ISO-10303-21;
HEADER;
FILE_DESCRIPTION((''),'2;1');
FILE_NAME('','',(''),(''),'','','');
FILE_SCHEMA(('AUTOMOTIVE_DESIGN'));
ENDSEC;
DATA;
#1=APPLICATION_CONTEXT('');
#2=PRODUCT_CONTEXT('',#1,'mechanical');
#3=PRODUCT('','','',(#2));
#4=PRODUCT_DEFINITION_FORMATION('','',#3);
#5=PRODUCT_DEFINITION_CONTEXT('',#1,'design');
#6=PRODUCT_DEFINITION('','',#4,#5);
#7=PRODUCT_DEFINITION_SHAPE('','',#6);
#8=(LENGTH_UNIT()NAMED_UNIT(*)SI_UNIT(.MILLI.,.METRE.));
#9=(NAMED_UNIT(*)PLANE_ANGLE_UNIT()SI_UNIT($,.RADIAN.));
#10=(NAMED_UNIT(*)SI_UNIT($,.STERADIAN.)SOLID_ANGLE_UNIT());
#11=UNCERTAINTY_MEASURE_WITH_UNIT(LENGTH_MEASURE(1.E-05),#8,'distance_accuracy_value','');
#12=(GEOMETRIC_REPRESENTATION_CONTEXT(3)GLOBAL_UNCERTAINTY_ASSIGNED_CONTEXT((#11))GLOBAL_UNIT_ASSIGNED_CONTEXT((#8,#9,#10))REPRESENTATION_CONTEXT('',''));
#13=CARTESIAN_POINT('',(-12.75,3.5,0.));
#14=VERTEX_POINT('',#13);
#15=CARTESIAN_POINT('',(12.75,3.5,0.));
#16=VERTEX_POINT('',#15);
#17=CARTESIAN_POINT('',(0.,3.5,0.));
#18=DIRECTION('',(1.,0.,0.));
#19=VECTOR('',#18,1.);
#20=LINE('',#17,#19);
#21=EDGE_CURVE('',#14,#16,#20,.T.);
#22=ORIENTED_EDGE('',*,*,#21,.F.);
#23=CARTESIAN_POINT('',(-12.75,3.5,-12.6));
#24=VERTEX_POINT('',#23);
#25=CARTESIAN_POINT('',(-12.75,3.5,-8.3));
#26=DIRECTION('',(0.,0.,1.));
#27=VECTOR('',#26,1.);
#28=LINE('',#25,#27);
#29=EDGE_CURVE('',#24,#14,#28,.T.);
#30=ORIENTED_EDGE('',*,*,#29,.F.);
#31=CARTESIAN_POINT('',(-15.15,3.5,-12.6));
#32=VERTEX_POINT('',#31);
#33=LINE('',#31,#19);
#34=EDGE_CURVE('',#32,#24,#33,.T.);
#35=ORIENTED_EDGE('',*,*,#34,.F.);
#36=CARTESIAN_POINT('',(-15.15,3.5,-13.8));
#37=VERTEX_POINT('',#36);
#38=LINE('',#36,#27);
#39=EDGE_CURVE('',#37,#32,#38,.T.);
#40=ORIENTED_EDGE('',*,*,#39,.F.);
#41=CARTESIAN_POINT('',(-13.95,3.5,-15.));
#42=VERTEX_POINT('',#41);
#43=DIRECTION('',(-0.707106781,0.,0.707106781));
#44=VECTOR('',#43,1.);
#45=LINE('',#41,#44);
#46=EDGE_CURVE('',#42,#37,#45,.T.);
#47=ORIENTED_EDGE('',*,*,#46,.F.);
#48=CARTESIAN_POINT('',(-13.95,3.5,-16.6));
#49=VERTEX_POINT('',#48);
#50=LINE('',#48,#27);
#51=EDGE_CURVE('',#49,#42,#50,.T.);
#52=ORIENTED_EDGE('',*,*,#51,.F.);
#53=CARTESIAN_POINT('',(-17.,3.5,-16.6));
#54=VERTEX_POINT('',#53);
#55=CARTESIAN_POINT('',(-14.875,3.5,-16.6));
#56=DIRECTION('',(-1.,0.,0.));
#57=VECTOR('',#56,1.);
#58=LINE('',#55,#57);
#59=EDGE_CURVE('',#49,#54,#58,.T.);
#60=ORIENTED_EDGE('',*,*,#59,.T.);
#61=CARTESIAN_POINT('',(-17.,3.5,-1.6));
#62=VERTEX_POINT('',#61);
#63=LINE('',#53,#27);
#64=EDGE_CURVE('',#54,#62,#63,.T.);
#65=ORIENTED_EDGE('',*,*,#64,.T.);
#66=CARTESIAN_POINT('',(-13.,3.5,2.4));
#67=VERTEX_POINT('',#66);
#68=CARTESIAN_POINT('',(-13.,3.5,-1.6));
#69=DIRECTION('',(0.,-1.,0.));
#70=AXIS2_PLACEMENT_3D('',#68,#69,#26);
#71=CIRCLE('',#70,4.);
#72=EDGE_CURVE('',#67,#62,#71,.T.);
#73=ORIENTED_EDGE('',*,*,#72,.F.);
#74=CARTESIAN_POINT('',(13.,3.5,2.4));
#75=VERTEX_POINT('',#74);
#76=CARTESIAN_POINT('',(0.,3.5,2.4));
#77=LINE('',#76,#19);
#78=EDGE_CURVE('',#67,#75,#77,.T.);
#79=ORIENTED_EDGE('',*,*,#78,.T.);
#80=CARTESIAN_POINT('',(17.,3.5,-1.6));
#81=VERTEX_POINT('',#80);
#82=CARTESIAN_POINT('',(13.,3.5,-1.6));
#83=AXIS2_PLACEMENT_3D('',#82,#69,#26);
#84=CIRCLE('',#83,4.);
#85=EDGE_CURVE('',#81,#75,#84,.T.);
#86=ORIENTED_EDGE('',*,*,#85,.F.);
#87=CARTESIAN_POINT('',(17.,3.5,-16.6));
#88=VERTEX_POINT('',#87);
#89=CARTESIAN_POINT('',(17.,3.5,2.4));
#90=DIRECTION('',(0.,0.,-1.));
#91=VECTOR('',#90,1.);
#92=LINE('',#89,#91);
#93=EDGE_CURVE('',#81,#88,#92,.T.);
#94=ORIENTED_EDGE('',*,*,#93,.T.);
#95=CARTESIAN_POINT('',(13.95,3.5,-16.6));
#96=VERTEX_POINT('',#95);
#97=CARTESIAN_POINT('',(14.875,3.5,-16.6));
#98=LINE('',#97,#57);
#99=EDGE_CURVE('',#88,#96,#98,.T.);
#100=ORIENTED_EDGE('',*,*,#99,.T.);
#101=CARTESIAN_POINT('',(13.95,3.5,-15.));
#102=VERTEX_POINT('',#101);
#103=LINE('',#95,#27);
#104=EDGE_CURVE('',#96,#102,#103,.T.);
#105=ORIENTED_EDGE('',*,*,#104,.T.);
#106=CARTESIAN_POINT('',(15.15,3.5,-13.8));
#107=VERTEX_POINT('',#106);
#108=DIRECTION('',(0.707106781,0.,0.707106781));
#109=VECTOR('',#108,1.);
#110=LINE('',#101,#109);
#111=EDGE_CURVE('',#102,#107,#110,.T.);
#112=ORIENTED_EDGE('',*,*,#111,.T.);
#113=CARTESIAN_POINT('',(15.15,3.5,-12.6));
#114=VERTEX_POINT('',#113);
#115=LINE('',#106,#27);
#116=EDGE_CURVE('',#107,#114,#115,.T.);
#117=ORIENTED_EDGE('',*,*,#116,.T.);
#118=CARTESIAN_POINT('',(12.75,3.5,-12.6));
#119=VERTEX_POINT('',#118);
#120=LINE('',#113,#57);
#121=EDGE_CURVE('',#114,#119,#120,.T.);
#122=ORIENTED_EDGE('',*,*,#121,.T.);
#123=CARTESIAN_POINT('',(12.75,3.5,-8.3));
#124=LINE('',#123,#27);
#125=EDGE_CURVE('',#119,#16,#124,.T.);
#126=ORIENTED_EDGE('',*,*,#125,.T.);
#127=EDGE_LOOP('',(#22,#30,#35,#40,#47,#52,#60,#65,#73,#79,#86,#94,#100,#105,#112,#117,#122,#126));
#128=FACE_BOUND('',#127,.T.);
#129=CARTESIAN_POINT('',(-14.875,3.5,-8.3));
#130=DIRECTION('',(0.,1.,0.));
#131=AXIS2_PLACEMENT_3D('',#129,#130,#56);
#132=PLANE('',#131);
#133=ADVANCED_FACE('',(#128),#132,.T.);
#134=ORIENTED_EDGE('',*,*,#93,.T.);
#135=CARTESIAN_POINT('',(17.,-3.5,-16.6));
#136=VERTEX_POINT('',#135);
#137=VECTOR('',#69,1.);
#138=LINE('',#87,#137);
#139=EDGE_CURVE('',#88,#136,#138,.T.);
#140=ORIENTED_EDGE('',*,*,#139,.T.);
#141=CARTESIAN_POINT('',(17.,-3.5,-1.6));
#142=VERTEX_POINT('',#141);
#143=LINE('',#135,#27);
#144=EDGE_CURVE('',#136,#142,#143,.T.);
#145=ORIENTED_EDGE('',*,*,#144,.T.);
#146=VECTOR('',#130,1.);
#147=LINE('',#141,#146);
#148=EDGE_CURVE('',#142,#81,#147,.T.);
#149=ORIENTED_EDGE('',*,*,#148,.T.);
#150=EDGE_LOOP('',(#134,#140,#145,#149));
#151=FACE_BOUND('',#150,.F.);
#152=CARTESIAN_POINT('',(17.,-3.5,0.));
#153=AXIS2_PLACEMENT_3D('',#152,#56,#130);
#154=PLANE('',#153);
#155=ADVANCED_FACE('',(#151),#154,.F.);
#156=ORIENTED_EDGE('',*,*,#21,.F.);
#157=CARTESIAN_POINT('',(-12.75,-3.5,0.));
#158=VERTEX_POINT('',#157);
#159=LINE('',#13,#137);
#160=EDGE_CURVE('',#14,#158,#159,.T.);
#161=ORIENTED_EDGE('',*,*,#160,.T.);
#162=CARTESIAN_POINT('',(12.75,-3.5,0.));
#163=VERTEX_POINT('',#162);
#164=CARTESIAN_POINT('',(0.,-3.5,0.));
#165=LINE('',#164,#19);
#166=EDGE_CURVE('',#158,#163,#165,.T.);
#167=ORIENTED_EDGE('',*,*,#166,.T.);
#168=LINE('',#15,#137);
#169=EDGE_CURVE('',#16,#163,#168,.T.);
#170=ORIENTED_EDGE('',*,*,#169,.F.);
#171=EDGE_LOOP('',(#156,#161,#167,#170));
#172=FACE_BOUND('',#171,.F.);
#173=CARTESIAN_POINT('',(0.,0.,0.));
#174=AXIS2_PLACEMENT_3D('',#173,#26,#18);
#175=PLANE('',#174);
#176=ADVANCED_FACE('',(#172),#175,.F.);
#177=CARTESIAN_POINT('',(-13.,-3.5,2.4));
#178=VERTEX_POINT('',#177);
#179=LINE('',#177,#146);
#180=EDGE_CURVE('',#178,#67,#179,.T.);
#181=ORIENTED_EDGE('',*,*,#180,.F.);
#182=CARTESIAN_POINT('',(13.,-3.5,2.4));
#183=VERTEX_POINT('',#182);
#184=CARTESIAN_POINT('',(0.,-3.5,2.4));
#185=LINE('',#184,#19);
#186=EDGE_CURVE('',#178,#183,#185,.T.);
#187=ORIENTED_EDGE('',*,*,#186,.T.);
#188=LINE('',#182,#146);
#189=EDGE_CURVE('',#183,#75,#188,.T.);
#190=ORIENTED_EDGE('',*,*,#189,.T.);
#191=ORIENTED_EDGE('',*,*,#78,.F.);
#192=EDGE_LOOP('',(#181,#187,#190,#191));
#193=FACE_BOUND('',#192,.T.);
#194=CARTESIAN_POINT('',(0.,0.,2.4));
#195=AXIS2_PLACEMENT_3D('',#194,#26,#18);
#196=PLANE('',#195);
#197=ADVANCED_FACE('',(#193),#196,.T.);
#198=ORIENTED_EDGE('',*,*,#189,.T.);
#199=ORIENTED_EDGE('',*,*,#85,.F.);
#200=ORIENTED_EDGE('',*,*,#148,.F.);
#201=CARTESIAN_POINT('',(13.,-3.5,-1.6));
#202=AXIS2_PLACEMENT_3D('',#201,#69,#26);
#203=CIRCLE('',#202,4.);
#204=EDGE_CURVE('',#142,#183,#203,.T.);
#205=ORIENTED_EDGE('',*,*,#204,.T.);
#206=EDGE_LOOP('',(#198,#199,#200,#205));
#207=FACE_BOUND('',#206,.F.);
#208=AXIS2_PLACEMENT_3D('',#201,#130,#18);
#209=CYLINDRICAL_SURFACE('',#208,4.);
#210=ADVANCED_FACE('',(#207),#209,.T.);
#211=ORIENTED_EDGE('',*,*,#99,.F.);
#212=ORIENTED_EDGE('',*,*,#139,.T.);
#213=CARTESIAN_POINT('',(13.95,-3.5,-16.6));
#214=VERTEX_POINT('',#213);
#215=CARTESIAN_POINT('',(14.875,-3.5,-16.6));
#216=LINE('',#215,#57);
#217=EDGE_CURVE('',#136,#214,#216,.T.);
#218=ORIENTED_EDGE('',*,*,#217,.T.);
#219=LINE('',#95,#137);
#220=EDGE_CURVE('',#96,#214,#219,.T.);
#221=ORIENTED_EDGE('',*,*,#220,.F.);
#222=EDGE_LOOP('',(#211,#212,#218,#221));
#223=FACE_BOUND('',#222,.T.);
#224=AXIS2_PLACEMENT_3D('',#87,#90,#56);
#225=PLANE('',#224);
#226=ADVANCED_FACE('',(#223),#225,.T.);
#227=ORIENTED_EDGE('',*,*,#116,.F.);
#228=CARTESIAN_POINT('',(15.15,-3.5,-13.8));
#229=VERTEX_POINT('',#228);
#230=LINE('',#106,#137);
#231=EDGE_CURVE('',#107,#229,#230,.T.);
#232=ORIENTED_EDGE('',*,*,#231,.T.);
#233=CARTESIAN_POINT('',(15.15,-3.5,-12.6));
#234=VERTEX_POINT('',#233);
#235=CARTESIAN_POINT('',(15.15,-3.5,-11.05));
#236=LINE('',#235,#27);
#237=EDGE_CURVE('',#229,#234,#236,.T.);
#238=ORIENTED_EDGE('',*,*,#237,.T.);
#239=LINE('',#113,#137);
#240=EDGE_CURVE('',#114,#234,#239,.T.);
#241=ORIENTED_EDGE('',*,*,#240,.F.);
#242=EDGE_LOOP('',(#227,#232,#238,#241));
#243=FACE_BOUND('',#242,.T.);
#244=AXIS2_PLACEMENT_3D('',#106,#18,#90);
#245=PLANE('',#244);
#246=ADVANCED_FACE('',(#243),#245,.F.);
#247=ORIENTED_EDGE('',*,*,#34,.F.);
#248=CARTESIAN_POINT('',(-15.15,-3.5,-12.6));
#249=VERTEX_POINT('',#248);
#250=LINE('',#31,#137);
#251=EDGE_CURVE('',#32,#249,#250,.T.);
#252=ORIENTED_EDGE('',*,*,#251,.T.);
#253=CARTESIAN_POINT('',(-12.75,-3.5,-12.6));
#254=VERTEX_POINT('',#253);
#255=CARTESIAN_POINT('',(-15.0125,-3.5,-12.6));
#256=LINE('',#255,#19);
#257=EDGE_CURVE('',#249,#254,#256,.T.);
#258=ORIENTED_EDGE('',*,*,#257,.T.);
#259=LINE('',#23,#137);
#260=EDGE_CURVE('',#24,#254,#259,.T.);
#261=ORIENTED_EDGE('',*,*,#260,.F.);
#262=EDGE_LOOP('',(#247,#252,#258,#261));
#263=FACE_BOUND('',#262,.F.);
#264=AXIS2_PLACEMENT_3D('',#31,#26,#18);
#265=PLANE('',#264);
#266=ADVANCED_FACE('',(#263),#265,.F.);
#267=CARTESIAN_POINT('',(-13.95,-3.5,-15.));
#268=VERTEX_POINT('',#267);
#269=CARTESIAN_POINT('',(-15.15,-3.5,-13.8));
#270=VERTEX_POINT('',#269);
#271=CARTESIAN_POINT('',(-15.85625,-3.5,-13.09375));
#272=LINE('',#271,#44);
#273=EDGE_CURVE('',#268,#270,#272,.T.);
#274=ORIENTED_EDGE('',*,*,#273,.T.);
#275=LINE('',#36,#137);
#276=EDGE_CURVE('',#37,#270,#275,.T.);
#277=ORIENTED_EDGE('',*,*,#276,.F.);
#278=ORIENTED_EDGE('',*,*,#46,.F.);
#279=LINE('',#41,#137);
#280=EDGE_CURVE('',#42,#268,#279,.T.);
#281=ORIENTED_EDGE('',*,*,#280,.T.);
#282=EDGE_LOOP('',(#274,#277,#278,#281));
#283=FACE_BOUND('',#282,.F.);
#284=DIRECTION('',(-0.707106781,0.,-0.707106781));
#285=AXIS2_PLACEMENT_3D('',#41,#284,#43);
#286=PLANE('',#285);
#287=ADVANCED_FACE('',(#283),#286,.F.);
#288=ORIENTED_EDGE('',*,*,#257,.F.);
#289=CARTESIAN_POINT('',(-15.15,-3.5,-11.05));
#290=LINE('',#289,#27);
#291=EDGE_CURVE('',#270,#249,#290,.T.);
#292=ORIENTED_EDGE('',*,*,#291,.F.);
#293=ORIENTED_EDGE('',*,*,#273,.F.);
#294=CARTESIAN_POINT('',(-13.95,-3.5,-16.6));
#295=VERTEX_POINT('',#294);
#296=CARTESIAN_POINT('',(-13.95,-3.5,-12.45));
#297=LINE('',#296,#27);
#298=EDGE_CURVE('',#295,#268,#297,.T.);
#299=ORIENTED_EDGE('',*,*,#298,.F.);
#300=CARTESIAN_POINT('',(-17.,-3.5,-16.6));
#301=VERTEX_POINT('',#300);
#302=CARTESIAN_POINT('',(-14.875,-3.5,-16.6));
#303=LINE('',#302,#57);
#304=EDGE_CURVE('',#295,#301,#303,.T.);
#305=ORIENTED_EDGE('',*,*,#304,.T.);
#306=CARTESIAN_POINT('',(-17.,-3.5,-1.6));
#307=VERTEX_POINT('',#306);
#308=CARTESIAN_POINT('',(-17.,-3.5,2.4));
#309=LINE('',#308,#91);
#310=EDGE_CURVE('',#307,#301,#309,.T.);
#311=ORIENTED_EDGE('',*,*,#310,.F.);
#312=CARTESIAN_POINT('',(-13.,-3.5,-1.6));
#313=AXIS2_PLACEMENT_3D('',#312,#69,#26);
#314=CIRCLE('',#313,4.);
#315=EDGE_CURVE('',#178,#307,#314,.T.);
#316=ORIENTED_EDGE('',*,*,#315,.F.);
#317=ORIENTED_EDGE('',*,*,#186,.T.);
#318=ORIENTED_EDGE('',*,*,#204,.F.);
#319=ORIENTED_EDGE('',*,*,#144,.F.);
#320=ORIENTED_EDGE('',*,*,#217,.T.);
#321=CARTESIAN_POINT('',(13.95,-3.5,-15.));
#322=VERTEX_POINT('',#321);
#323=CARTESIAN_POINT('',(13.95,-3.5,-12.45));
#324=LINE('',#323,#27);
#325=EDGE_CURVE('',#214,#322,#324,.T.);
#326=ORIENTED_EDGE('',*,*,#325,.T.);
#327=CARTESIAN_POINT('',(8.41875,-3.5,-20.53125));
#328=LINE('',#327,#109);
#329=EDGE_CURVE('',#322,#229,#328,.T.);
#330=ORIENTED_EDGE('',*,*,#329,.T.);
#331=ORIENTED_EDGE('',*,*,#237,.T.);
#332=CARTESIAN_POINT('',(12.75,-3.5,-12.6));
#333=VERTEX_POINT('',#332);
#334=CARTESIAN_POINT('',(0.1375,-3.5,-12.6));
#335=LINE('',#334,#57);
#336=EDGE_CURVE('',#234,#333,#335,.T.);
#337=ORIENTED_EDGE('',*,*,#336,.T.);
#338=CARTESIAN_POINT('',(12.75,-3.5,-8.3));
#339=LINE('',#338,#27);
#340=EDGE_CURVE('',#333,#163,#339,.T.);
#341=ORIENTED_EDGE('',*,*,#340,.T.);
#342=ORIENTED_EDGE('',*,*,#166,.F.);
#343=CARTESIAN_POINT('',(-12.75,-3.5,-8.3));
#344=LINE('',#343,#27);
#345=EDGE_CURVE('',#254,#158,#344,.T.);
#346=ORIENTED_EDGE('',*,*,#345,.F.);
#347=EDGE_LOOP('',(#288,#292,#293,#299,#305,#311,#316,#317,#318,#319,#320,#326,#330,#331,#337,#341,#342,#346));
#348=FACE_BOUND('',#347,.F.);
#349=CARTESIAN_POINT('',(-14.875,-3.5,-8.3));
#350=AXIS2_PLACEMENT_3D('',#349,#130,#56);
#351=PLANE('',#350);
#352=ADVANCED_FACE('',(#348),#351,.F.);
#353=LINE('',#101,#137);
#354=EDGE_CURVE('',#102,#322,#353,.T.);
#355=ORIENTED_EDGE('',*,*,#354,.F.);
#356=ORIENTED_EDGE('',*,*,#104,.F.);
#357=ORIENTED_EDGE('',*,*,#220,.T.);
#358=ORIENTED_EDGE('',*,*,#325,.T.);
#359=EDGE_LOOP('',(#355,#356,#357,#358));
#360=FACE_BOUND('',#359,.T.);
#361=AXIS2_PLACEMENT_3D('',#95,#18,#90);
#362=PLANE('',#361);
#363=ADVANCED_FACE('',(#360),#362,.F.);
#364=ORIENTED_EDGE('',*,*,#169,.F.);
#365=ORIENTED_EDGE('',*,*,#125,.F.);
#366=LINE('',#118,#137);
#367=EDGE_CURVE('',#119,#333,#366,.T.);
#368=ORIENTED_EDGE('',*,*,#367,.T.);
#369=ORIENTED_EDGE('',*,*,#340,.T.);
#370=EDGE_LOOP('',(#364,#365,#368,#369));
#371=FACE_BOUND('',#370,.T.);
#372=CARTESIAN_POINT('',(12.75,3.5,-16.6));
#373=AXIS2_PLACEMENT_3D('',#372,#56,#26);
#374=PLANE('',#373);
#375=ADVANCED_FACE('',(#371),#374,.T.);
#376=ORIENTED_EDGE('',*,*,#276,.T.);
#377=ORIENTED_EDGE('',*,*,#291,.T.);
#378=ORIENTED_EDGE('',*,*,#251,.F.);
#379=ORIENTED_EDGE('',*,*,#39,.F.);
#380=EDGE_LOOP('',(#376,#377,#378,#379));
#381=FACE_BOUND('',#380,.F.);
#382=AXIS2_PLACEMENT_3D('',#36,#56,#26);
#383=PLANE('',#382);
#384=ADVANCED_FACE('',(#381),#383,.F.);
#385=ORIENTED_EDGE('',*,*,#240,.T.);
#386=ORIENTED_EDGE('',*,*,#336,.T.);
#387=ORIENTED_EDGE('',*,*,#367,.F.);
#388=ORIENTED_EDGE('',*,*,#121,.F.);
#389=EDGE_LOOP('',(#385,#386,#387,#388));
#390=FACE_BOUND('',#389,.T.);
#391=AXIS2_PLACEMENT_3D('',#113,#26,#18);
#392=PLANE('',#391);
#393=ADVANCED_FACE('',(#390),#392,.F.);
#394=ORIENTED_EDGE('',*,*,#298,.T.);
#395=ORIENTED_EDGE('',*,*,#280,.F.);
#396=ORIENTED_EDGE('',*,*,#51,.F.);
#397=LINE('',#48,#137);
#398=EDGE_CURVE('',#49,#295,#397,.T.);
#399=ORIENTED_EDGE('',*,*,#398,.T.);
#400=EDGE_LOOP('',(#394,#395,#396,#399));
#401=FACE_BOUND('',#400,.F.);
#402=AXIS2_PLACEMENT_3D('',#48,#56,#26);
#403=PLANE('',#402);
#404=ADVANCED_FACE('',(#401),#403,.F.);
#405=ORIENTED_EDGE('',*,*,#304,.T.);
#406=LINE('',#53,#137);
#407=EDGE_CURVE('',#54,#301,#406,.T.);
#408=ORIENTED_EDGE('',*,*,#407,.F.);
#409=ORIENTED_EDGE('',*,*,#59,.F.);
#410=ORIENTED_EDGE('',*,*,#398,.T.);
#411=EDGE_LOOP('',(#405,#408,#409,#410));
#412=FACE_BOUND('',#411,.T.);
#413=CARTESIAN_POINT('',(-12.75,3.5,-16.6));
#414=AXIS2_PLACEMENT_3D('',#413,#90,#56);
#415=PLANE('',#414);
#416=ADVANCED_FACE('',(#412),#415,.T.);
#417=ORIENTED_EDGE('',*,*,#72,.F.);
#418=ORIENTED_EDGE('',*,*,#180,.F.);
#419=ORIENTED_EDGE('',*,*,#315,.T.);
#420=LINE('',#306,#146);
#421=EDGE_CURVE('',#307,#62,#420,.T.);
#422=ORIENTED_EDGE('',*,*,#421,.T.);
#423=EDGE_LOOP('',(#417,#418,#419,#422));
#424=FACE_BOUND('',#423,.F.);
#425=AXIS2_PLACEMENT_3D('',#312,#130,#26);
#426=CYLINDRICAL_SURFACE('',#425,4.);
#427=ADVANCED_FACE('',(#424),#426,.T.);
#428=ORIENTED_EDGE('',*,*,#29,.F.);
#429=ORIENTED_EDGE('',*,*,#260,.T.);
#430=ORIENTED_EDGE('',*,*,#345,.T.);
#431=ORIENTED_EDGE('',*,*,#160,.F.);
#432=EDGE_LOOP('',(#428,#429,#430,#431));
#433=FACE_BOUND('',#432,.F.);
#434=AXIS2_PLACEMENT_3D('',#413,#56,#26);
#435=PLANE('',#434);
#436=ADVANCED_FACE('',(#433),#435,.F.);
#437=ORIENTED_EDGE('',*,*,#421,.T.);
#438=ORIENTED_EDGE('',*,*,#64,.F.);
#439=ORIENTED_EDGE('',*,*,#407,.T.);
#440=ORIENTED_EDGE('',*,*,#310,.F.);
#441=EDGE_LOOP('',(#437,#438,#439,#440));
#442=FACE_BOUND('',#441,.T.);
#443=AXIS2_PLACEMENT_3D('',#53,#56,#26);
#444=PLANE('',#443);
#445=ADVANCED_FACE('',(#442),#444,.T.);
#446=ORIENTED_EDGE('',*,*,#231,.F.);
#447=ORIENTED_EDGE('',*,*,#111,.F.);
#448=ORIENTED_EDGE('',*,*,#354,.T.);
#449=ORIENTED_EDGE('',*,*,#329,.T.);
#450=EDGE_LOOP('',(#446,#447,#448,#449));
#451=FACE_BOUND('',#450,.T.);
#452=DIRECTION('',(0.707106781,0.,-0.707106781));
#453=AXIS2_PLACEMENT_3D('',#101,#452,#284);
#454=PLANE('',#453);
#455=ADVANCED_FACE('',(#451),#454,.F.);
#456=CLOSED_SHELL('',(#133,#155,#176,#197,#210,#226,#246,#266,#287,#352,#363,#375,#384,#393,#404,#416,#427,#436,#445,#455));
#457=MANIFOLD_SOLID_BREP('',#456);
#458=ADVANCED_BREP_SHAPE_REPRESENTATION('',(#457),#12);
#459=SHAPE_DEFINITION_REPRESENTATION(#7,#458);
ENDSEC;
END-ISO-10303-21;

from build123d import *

# Parameters (mm, degrees)
F0_W     = 34
F0_H     = 7
F1_DEPTH = 2.4
F2_W     = 4.25
F2_H     = 16.6
F3_DEPTH = 7
F5_DEPTH = 10
F6_R     = 4


# Not quite as in the source:
# - a pattern or mirror of a feature is missing from the dataset's text; its kind, count and spacing are read off the source's solid


with BuildPart() as f1:
    # F0 (on Top) → F1 (new body)
    with BuildSketch(Plane.XY):
        Rectangle(F0_W, F0_H)
    extrude(amount=F1_DEPTH)

    # F2 (on face) → F3 (join)
    with BuildSketch(Plane(origin=(0, 3.5, 0), x_dir=(-1, 0, 0), z_dir=(0, 1, 0))):
        with Locations((14.875, -8.3)):
            Rectangle(F2_W, F2_H)
        with Locations((-14.875, -8.3)):
            Rectangle(F2_W, F2_H)
    extrude(amount=-F3_DEPTH)

    # F4 (on face) → F5 (cut)
    with BuildSketch(Plane(origin=(0, 3.5, 0), x_dir=(-1, 0, 0), z_dir=(0, 1, 0))):
        Polygon((12.75, -12.6), (12.75, -16.6), (13.95, -16.6), (13.95, -15), (15.15, -13.8), (15.15, -12.6), align=None)
    f5 = extrude(amount=-F5_DEPTH, mode=Mode.SUBTRACT)

    # F5_copies: F5 across plane
    add(f5.mirror(Plane(origin=(0, 0, 0), x_dir=(0, 0, 1), z_dir=(1, 0, 0))), mode=Mode.SUBTRACT)

    # F6
    f6_edges = [f1.edges().sort_by_distance(p)[0] for p in [
        (17, 0, 2.4),
        (-17, 0, 2.4),
    ]]
    fillet(f6_edges, radius=F6_R)


solid = f1.part
